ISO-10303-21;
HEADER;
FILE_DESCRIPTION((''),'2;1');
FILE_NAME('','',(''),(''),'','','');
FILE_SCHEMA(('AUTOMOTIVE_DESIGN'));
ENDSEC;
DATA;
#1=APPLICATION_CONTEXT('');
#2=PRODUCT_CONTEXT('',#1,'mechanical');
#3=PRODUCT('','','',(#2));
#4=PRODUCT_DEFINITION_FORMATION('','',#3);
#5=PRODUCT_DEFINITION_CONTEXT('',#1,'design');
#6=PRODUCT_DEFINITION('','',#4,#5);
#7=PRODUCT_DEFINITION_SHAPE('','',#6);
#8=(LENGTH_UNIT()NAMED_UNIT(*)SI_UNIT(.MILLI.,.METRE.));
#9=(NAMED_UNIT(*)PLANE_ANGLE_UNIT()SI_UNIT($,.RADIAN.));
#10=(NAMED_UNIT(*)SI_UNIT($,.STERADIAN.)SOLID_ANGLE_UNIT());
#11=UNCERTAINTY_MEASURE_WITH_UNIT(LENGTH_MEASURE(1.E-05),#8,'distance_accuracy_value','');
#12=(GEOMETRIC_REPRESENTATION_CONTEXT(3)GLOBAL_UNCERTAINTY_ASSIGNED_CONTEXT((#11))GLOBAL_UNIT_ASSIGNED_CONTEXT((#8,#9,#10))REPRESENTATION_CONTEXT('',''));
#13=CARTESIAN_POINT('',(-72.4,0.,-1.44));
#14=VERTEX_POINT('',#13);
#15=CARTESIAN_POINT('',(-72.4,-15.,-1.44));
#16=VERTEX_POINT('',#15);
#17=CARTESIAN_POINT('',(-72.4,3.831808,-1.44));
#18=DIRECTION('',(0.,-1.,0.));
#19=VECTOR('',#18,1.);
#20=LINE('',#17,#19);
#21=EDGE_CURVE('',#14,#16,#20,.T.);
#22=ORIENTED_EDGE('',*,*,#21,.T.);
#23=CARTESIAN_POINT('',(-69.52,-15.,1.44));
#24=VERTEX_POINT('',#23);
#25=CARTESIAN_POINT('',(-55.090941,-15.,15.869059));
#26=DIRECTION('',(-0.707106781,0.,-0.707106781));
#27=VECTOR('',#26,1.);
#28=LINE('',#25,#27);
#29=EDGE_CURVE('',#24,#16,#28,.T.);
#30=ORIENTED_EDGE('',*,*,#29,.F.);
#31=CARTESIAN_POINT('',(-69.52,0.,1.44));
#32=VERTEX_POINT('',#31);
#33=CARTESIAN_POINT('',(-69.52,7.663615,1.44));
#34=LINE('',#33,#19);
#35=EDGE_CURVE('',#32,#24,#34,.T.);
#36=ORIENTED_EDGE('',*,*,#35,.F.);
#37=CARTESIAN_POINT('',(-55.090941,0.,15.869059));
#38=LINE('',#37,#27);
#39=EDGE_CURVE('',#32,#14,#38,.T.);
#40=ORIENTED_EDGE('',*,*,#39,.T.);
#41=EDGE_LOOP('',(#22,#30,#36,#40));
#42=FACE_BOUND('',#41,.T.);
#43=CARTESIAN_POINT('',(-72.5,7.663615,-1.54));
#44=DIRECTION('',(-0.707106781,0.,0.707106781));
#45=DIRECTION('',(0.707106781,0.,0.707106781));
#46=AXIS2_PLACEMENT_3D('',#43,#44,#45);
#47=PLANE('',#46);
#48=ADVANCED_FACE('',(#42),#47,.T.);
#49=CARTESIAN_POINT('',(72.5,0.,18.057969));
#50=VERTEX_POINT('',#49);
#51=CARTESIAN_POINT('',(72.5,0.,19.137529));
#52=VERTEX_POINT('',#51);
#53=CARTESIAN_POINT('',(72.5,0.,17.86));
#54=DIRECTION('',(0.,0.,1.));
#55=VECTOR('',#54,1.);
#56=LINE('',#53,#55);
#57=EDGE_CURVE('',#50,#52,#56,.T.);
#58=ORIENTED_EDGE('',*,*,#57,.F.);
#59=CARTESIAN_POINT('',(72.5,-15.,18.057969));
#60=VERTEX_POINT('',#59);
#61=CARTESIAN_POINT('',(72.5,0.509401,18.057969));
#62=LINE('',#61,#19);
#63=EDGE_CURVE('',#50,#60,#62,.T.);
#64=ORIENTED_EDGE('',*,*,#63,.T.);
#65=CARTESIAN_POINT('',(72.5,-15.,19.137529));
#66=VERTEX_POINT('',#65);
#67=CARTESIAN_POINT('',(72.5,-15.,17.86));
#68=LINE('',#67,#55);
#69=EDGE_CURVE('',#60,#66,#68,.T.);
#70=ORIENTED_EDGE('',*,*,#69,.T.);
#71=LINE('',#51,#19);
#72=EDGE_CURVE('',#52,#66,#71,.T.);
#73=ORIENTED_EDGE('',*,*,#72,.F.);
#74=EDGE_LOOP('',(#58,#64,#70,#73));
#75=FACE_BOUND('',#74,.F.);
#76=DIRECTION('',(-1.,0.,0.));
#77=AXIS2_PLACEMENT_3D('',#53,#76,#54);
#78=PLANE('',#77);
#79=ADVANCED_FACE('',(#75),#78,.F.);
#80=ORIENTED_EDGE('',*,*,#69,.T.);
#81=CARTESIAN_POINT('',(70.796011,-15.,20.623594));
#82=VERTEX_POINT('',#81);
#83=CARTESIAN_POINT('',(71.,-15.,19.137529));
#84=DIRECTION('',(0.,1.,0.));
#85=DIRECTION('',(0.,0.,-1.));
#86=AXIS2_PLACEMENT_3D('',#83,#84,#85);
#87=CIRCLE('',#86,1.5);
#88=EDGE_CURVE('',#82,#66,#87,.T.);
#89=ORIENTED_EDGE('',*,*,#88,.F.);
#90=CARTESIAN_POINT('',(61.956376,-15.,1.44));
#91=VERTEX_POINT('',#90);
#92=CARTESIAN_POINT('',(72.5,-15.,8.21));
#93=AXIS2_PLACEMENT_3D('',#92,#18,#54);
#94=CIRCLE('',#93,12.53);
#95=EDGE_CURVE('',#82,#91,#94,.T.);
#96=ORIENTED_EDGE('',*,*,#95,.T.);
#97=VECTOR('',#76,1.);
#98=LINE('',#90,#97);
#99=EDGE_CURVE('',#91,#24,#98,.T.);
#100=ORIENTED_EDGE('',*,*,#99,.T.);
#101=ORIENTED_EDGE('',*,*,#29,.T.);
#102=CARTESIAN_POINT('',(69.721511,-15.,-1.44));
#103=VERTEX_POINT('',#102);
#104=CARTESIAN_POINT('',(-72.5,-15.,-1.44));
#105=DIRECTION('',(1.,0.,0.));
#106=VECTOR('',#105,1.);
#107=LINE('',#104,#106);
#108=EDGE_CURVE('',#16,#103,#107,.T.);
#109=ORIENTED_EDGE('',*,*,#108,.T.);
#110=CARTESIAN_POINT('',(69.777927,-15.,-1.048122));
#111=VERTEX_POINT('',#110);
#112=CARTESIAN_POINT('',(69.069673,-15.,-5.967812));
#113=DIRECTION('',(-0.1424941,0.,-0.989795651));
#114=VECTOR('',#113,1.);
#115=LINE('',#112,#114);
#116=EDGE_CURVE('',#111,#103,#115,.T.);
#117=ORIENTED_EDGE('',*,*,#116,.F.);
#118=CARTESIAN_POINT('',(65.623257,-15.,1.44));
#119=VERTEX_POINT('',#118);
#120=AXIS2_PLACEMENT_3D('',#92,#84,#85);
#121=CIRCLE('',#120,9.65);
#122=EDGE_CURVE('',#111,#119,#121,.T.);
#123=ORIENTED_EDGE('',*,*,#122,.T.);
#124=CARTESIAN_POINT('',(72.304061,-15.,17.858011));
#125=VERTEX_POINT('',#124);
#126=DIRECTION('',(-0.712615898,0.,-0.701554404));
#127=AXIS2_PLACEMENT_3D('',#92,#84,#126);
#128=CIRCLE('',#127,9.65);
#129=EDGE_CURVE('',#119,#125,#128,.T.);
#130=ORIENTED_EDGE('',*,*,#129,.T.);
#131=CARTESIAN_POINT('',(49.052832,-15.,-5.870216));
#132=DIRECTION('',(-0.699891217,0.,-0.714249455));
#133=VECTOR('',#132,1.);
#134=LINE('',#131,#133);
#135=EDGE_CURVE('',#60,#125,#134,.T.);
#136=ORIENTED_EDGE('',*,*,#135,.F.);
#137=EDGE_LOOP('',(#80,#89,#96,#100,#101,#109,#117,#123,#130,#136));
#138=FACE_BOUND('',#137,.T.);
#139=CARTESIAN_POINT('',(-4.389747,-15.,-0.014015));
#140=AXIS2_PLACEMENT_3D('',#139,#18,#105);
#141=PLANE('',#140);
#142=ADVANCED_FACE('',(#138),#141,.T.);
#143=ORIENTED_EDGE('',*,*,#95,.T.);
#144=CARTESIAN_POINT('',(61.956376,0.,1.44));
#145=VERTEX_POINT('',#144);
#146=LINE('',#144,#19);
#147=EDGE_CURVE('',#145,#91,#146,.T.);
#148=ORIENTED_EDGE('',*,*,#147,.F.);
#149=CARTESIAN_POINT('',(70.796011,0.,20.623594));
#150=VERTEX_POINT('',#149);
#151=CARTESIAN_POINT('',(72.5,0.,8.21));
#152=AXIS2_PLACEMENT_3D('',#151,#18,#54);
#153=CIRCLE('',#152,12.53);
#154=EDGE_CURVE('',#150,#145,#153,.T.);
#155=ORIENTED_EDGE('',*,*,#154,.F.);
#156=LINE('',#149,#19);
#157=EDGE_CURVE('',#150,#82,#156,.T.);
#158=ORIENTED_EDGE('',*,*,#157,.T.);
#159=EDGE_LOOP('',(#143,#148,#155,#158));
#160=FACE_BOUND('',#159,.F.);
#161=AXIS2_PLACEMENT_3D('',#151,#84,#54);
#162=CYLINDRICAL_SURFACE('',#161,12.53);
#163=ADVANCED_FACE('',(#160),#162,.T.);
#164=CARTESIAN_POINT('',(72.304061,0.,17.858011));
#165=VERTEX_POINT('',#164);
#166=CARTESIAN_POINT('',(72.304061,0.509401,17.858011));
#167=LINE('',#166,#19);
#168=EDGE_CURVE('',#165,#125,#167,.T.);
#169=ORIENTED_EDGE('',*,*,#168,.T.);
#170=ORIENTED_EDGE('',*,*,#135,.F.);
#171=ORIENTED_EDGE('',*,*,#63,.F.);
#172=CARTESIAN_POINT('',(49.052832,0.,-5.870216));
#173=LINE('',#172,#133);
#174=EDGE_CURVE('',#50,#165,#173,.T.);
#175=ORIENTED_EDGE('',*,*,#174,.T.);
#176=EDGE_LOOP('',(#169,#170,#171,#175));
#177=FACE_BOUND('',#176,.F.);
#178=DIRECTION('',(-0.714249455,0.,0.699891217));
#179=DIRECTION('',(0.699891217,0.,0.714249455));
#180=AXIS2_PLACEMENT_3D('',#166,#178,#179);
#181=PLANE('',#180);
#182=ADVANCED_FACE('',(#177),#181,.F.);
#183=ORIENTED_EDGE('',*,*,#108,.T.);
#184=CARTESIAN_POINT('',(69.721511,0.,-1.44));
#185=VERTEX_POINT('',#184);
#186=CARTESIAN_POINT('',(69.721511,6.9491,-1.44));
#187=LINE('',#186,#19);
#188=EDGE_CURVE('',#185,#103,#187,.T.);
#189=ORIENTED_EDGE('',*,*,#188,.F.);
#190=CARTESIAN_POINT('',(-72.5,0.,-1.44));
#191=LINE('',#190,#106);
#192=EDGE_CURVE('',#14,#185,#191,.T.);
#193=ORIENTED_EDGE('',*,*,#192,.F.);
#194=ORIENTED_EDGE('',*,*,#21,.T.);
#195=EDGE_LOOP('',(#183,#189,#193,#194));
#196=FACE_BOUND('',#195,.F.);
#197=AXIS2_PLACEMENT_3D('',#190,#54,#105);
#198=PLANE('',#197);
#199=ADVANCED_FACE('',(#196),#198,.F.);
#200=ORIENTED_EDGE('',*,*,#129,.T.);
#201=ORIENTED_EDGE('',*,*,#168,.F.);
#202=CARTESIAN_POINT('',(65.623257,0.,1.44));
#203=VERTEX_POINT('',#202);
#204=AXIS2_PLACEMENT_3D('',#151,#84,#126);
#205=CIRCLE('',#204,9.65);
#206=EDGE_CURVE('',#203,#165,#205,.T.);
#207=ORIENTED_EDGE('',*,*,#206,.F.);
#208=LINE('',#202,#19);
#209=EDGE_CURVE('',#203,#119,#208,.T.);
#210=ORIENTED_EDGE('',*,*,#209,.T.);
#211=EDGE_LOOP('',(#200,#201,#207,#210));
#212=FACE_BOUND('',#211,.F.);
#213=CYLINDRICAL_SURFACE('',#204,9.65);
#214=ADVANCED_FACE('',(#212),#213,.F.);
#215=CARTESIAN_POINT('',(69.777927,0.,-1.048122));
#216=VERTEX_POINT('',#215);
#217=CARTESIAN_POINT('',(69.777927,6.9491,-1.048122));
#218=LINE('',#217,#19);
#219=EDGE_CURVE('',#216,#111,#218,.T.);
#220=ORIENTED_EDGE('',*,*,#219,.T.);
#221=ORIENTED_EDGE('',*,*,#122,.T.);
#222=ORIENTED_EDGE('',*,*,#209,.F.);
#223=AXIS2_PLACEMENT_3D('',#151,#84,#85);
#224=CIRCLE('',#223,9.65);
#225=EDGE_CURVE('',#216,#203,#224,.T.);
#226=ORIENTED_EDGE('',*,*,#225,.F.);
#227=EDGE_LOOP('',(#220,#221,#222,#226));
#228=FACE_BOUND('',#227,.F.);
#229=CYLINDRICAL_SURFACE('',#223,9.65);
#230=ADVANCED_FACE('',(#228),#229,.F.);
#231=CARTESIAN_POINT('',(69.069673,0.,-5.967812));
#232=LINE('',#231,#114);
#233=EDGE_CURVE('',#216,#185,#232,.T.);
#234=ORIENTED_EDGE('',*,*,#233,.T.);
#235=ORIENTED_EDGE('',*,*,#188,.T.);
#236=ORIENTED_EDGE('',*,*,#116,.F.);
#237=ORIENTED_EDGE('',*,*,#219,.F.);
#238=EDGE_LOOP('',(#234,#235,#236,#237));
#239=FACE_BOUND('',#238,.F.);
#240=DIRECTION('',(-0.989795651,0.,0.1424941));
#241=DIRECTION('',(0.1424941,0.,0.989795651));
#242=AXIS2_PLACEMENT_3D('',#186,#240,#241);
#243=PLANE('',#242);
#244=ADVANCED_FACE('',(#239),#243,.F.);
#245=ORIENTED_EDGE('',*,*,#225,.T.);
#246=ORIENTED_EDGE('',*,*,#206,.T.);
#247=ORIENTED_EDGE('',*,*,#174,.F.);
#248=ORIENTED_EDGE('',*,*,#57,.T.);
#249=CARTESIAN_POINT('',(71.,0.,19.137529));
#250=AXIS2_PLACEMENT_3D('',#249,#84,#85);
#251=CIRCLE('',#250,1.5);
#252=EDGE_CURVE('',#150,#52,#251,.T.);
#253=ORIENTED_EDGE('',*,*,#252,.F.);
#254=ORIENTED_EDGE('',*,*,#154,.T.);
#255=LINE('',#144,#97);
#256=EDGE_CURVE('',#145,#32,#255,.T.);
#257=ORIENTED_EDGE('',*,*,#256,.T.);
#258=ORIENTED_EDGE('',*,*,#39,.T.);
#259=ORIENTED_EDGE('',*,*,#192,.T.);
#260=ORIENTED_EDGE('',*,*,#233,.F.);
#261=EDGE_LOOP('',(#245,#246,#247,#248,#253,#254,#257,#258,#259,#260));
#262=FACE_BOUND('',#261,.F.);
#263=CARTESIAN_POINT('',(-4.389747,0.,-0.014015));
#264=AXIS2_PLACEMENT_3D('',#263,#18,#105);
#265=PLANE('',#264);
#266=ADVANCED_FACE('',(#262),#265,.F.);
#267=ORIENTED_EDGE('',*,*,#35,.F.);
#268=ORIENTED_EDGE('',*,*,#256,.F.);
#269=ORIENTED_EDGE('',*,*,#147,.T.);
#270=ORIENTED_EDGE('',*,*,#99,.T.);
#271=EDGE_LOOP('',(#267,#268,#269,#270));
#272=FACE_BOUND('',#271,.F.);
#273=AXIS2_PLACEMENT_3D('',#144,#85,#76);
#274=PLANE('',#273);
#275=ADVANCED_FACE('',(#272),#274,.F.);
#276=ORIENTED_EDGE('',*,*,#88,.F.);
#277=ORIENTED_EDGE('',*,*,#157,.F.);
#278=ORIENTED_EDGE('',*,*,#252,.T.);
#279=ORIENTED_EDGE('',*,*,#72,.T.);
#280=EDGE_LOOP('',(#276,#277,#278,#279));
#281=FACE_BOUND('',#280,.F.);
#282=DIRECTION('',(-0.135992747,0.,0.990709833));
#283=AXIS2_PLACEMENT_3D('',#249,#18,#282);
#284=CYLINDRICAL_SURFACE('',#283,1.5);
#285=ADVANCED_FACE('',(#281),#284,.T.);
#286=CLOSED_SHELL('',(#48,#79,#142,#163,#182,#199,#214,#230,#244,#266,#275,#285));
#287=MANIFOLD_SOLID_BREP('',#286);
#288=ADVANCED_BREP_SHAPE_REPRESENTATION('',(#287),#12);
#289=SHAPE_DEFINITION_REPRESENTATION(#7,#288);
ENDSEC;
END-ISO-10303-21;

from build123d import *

# Parameters (mm, degrees)
F1_DEPTH    = 15
F2_T1_DEPTH = 28.8982001462
F2_T3_DEPTH = 16.0188013663
F3_T1_DEPTH = 30.3272306083
F4_R        = 1.5


# Not quite as in the source:
# - a fillet or chamfer that OpenCascade refuses, or shapes differently, is made with other operations: its cross-section is extruded or revolved along the edge and cut away or added
# - a feature names something its author has since deleted; it is built from what else it names


with BuildPart() as f1:
    # F0 (on Front) → F1 (new body)
    with BuildSketch(Plane.XZ):
        with BuildLine():
            ThreePointArc((64.5076036134, -1.44), (63.120788421, -0.0985070956), (61.9563763345, 1.44))
            Line((61.9563763345, 1.44), (-72.5, 1.44))
            Line((-72.5, 1.44), (-72.5, -1.44))
            Line((-72.5, -1.44), (64.5076036134, -1.44))
        make_face()
        with BuildLine():
            Line((61.9563763345, 1.44), (65.6232565847, 1.44))
            ThreePointArc((65.6232565847, 1.44), (63.599073082, 11.9377338961), (72.5, 17.86))
            Line((72.5, 17.86), (72.5, 20.74))
            ThreePointArc((72.5, 20.74), (61.5038870504, 14.2171956852), (61.9563763345, 1.44))
        make_face()
        with BuildLine():
            ThreePointArc((72.5, -1.44), (68.7722661039, -0.690926918), (65.6232565847, 1.44))
            Line((65.6232565847, 1.44), (61.9563763345, 1.44))
            ThreePointArc((61.9563763345, 1.44), (63.120788421, -0.0985070956), (64.5076036134, -1.44))
            Line((64.5076036134, -1.44), (72.5, -1.44))
        make_face()
    extrude(amount=F1_DEPTH)

    # F2: chamfer of 0.2 on 2 edges, made by hand

    # F2_s2 → F2_t1 (cut)
    with BuildSketch(Plane.XZ.offset(-6.9491000731)):
        with BuildLine():
            Line((69.7215112021, -1.44), (69.7779272183, -1.0481218274))
            ThreePointArc((69.7779272183, -1.0481218274), (71.1249319352, -1.3415280357), (72.5, -1.44))
            Line((72.5, -1.44), (69.7215112021, -1.44))
        make_face()
    extrude(amount=F2_T1_DEPTH, mode=Mode.SUBTRACT)

    # F2_s4 → F2_t3 (cut)
    with BuildSketch(Plane.XZ.offset(-0.5094006831)):
        with BuildLine():
            Line((72.3040609137, 17.8580105656), (72.5, 18.0579693338))
            Line((72.5, 18.0579693338), (72.5, 17.86))
            ThreePointArc((72.5, 17.86), (72.399196155, 17.8594734874), (72.3040609137, 17.8580105656))
        make_face()
    extrude(amount=F2_T3_DEPTH, mode=Mode.SUBTRACT)

    # F3: chamfer of 2.98 on 1 edges, made by hand

    # F3_s2 → F3_t1 (cut)
    with BuildSketch(Plane.XZ.offset(-7.6636153041)):
        Polygon((-72.5, -1.54), (-69.52, 1.44), (-72.5, 1.44), align=None)
    extrude(amount=F3_T1_DEPTH, mode=Mode.SUBTRACT)

    # F4
    f4_edges = [f1.edges().sort_by_distance(p)[0] for p in [
        (72.5, -7.5, 20.74),
    ]]
    fillet(f4_edges, radius=F4_R)


solid = f1.part
